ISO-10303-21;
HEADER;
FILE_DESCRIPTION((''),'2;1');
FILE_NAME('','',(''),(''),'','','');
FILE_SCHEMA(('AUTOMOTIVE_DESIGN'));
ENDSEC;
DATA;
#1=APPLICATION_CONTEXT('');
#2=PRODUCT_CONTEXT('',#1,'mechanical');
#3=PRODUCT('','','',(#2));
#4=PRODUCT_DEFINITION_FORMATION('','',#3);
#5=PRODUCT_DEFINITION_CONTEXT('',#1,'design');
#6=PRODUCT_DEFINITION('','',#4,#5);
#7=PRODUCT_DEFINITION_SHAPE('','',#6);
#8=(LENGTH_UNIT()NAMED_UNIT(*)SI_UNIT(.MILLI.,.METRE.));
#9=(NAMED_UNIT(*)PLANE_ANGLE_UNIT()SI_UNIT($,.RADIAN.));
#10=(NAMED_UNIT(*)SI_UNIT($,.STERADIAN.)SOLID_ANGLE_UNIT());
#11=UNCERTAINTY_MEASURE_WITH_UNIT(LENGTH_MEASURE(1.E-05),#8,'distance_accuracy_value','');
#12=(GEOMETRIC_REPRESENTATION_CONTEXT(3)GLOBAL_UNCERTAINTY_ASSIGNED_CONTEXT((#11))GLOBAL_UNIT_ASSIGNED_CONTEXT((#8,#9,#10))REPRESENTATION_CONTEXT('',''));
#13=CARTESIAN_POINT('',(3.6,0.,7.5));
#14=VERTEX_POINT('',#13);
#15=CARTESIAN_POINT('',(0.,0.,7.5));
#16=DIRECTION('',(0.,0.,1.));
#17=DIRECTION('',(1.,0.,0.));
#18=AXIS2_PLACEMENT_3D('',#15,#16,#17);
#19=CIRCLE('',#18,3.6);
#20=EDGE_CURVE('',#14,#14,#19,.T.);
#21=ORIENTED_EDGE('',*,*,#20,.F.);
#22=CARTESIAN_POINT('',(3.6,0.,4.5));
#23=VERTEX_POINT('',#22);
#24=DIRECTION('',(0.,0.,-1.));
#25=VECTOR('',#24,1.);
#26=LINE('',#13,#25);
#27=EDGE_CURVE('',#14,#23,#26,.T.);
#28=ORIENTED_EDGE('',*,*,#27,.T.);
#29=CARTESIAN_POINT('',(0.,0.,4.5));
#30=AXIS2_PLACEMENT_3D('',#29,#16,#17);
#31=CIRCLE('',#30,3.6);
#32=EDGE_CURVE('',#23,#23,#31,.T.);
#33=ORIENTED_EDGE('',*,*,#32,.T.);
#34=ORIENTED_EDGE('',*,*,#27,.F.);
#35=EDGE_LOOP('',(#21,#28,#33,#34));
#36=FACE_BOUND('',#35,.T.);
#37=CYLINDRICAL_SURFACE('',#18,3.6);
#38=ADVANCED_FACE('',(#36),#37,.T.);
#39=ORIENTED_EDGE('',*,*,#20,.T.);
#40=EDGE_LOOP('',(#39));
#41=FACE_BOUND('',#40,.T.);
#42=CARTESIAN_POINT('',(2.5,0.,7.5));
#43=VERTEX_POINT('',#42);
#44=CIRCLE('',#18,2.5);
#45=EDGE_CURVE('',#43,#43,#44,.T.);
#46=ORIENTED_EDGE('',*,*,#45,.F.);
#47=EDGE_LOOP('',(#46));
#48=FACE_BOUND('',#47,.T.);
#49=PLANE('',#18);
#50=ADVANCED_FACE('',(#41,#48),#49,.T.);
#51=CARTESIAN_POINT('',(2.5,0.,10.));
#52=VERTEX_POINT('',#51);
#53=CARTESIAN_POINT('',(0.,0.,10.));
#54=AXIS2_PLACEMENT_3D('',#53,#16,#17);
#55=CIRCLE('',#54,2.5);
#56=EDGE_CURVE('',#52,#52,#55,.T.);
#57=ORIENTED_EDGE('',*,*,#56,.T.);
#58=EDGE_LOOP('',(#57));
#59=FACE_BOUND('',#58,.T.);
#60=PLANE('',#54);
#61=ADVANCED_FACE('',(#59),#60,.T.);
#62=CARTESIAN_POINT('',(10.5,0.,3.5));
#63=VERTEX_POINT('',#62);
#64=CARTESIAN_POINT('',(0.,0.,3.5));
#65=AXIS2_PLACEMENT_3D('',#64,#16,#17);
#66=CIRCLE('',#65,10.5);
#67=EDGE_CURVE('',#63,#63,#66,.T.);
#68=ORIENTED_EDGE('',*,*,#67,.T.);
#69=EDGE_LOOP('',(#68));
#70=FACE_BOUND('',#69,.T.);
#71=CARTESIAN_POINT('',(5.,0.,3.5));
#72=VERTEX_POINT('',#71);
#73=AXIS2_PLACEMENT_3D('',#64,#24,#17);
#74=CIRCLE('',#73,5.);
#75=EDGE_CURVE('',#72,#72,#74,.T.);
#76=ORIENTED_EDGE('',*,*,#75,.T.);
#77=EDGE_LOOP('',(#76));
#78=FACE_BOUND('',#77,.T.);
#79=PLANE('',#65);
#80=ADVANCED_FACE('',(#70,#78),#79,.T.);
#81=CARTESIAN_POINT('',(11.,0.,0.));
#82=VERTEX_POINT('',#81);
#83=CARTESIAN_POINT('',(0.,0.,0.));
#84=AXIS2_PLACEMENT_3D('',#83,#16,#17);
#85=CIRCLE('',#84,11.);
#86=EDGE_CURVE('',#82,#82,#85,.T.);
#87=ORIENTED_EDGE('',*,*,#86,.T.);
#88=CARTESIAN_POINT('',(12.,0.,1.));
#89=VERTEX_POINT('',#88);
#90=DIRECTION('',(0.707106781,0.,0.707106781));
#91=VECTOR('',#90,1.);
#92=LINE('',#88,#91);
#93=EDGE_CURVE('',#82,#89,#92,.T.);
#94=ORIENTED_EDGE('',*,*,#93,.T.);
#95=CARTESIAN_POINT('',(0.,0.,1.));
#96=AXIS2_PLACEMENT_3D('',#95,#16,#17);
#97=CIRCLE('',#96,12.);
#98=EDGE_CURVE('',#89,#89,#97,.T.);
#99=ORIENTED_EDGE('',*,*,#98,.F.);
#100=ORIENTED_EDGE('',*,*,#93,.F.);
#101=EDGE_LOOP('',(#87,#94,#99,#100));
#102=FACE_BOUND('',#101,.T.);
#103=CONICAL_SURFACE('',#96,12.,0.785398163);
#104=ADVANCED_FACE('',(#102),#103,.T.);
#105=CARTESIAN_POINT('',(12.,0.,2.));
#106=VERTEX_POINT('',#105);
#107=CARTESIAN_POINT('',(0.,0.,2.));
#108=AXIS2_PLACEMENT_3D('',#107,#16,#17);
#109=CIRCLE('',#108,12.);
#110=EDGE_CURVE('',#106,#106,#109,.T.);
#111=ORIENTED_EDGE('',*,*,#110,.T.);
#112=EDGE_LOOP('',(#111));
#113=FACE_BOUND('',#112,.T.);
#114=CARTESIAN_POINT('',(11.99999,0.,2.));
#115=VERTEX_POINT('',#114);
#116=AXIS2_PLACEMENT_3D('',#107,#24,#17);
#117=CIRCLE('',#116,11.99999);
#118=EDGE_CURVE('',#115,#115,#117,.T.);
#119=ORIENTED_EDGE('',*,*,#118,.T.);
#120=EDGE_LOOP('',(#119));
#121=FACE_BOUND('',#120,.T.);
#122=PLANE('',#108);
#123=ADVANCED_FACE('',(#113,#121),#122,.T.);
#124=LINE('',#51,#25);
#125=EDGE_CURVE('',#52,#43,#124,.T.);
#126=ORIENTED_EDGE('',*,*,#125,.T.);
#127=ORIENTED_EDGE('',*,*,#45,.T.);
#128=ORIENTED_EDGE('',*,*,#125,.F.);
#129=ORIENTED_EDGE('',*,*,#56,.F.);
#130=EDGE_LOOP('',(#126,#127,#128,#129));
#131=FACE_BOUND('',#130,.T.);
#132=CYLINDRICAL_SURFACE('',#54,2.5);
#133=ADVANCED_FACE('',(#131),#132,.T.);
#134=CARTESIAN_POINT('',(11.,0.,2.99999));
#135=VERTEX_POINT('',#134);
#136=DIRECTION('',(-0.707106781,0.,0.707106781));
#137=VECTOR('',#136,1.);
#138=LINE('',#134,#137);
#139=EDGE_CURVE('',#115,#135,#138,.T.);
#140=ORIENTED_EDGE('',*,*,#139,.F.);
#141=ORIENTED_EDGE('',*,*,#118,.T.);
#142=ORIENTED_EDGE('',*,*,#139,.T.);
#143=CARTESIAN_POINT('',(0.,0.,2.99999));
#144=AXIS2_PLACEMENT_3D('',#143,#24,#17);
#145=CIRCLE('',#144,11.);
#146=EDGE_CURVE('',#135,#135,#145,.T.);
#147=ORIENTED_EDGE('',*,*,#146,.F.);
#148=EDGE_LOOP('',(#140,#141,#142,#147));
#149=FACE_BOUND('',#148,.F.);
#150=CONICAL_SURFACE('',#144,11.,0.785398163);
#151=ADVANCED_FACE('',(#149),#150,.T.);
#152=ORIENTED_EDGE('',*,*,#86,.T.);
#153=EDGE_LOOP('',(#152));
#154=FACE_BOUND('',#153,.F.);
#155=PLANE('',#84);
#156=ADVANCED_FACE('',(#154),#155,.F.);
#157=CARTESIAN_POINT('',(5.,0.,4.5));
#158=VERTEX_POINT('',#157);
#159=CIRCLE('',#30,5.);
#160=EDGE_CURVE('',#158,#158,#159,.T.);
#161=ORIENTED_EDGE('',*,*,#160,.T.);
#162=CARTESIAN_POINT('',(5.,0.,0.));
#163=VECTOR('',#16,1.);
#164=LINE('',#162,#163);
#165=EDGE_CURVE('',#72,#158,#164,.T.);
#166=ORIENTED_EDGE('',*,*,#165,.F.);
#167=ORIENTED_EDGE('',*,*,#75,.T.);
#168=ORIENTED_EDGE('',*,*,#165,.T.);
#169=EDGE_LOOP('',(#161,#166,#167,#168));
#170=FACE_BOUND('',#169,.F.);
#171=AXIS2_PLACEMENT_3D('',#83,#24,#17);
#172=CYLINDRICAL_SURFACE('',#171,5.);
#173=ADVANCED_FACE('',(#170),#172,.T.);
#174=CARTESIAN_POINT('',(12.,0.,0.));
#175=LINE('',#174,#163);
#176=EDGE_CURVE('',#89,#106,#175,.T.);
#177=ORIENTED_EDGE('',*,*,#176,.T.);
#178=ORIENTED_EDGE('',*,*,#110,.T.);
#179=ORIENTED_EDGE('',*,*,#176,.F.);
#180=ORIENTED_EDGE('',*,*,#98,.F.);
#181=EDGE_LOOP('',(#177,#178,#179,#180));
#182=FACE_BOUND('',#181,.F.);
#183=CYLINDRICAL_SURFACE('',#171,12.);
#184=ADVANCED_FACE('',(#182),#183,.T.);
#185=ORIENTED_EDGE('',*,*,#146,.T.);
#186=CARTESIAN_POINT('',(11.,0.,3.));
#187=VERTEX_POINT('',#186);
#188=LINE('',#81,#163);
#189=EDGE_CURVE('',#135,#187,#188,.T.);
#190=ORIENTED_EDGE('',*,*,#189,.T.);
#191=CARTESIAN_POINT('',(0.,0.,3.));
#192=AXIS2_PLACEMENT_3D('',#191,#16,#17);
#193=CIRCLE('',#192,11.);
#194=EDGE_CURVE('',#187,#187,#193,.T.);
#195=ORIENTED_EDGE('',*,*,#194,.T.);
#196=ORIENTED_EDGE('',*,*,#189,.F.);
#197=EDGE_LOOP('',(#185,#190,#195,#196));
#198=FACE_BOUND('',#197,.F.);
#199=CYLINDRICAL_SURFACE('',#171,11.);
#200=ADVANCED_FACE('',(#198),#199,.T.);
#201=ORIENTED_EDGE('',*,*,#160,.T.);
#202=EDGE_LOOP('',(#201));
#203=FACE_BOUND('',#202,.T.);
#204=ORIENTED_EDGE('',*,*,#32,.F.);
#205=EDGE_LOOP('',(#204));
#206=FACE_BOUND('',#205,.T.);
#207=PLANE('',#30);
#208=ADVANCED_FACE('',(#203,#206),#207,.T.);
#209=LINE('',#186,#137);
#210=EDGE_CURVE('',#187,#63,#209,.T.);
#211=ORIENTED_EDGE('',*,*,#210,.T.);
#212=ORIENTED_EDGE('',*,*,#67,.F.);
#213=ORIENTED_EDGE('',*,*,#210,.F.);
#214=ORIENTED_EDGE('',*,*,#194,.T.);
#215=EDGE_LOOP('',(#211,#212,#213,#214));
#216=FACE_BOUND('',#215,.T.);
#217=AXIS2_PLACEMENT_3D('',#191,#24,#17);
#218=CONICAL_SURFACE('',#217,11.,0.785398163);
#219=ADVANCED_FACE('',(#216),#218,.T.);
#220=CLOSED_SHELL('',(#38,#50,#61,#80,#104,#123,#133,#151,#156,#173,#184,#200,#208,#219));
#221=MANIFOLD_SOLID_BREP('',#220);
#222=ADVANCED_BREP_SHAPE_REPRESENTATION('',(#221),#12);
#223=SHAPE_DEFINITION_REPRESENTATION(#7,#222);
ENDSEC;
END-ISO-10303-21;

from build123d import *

# Parameters (mm, degrees)
F0_R      = 12
F0_R_2    = 11
F0_R_3    = 5
F0_R_4    = 4.1
F0_R_5    = 3
F1_DEPTH  = 2
F2_DEPTH  = 3.5
F3_SIZE   = 0.99999
F4_DEPTH  = 4.5
F5_DEPTH  = 7.5
F6_DEPTH  = 10
F7_SIZE   = 1
F8_SIZE   = 0.5
F9_R      = 3
F9_R_2    = 2.5
F10_DEPTH = 2.5
F11_R     = 4.1
F11_R_2   = 3.6
F12_DEPTH = 3


# Not quite as in the source:
# - a fillet or chamfer is up to 0.001 mm smaller than in the source, because OpenCascade refuses the exact size


with BuildPart() as f1:
    # F0 (on Top) → F1 (new body)
    with BuildSketch(Plane.XY):
        Circle(F0_R)
        Circle(F0_R_2, mode=Mode.SUBTRACT)
        Circle(F0_R_2)
        Circle(F0_R_3, mode=Mode.SUBTRACT)
        Circle(F0_R_3)
        Circle(F0_R_4, mode=Mode.SUBTRACT)
        Circle(F0_R_4)
        Circle(F0_R_5, mode=Mode.SUBTRACT)
        Circle(F0_R_5)
    extrude(amount=F1_DEPTH)

    # F0 (on Top) → F2 (join)
    with BuildSketch(Plane.XY):
        Circle(F0_R_2)
        Circle(F0_R_3, mode=Mode.SUBTRACT)
        Circle(F0_R_3)
        Circle(F0_R_4, mode=Mode.SUBTRACT)
        Circle(F0_R_4)
        Circle(F0_R_5, mode=Mode.SUBTRACT)
        Circle(F0_R_5)
    extrude(amount=F2_DEPTH)

    # F3 (size 1 in the source; OpenCascade refuses exactly that, so slightly less here)
    f3_edges = [f1.edges().sort_by_distance(p)[0] for p in [
        (-11, 0, 2),
    ]]
    chamfer(f3_edges, length=F3_SIZE)

    # F0 (on Top) → F4 (join)
    with BuildSketch(Plane.XY):
        Circle(F0_R_3)
        Circle(F0_R_4, mode=Mode.SUBTRACT)
        Circle(F0_R_4)
        Circle(F0_R_5, mode=Mode.SUBTRACT)
        Circle(F0_R_5)
    extrude(amount=F4_DEPTH)

    # F0 (on Top) → F5 (join)
    with BuildSketch(Plane.XY):
        Circle(F0_R_4)
        Circle(F0_R_5, mode=Mode.SUBTRACT)
    extrude(amount=F5_DEPTH)

    # F0 (on Top) → F6 (join)
    with BuildSketch(Plane.XY):
        Circle(F0_R_5)
    extrude(amount=F6_DEPTH)

    # F7
    f7_edges = [f1.edges().sort_by_distance(p)[0] for p in [
        (-12, 0, 0),
    ]]
    chamfer(f7_edges, length=F7_SIZE)

    # F8
    f8_edges = [f1.edges().sort_by_distance(p)[0] for p in [
        (-11, 0, 3.5),
    ]]
    chamfer(f8_edges, length=F8_SIZE)

    # F9 (on face) → F10 (cut, through all)
    with BuildSketch(Plane.XY.offset(10)):
        Circle(F9_R)
        Circle(F9_R_2, mode=Mode.SUBTRACT)
    extrude(amount=-F10_DEPTH, mode=Mode.SUBTRACT)

    # F11 (on face) → F12 (cut, through all)
    with BuildSketch(Plane.XY.offset(7.5)):
        Circle(F11_R)
        Circle(F11_R_2, mode=Mode.SUBTRACT)
    extrude(amount=-F12_DEPTH, mode=Mode.SUBTRACT)


solid = f1.part
